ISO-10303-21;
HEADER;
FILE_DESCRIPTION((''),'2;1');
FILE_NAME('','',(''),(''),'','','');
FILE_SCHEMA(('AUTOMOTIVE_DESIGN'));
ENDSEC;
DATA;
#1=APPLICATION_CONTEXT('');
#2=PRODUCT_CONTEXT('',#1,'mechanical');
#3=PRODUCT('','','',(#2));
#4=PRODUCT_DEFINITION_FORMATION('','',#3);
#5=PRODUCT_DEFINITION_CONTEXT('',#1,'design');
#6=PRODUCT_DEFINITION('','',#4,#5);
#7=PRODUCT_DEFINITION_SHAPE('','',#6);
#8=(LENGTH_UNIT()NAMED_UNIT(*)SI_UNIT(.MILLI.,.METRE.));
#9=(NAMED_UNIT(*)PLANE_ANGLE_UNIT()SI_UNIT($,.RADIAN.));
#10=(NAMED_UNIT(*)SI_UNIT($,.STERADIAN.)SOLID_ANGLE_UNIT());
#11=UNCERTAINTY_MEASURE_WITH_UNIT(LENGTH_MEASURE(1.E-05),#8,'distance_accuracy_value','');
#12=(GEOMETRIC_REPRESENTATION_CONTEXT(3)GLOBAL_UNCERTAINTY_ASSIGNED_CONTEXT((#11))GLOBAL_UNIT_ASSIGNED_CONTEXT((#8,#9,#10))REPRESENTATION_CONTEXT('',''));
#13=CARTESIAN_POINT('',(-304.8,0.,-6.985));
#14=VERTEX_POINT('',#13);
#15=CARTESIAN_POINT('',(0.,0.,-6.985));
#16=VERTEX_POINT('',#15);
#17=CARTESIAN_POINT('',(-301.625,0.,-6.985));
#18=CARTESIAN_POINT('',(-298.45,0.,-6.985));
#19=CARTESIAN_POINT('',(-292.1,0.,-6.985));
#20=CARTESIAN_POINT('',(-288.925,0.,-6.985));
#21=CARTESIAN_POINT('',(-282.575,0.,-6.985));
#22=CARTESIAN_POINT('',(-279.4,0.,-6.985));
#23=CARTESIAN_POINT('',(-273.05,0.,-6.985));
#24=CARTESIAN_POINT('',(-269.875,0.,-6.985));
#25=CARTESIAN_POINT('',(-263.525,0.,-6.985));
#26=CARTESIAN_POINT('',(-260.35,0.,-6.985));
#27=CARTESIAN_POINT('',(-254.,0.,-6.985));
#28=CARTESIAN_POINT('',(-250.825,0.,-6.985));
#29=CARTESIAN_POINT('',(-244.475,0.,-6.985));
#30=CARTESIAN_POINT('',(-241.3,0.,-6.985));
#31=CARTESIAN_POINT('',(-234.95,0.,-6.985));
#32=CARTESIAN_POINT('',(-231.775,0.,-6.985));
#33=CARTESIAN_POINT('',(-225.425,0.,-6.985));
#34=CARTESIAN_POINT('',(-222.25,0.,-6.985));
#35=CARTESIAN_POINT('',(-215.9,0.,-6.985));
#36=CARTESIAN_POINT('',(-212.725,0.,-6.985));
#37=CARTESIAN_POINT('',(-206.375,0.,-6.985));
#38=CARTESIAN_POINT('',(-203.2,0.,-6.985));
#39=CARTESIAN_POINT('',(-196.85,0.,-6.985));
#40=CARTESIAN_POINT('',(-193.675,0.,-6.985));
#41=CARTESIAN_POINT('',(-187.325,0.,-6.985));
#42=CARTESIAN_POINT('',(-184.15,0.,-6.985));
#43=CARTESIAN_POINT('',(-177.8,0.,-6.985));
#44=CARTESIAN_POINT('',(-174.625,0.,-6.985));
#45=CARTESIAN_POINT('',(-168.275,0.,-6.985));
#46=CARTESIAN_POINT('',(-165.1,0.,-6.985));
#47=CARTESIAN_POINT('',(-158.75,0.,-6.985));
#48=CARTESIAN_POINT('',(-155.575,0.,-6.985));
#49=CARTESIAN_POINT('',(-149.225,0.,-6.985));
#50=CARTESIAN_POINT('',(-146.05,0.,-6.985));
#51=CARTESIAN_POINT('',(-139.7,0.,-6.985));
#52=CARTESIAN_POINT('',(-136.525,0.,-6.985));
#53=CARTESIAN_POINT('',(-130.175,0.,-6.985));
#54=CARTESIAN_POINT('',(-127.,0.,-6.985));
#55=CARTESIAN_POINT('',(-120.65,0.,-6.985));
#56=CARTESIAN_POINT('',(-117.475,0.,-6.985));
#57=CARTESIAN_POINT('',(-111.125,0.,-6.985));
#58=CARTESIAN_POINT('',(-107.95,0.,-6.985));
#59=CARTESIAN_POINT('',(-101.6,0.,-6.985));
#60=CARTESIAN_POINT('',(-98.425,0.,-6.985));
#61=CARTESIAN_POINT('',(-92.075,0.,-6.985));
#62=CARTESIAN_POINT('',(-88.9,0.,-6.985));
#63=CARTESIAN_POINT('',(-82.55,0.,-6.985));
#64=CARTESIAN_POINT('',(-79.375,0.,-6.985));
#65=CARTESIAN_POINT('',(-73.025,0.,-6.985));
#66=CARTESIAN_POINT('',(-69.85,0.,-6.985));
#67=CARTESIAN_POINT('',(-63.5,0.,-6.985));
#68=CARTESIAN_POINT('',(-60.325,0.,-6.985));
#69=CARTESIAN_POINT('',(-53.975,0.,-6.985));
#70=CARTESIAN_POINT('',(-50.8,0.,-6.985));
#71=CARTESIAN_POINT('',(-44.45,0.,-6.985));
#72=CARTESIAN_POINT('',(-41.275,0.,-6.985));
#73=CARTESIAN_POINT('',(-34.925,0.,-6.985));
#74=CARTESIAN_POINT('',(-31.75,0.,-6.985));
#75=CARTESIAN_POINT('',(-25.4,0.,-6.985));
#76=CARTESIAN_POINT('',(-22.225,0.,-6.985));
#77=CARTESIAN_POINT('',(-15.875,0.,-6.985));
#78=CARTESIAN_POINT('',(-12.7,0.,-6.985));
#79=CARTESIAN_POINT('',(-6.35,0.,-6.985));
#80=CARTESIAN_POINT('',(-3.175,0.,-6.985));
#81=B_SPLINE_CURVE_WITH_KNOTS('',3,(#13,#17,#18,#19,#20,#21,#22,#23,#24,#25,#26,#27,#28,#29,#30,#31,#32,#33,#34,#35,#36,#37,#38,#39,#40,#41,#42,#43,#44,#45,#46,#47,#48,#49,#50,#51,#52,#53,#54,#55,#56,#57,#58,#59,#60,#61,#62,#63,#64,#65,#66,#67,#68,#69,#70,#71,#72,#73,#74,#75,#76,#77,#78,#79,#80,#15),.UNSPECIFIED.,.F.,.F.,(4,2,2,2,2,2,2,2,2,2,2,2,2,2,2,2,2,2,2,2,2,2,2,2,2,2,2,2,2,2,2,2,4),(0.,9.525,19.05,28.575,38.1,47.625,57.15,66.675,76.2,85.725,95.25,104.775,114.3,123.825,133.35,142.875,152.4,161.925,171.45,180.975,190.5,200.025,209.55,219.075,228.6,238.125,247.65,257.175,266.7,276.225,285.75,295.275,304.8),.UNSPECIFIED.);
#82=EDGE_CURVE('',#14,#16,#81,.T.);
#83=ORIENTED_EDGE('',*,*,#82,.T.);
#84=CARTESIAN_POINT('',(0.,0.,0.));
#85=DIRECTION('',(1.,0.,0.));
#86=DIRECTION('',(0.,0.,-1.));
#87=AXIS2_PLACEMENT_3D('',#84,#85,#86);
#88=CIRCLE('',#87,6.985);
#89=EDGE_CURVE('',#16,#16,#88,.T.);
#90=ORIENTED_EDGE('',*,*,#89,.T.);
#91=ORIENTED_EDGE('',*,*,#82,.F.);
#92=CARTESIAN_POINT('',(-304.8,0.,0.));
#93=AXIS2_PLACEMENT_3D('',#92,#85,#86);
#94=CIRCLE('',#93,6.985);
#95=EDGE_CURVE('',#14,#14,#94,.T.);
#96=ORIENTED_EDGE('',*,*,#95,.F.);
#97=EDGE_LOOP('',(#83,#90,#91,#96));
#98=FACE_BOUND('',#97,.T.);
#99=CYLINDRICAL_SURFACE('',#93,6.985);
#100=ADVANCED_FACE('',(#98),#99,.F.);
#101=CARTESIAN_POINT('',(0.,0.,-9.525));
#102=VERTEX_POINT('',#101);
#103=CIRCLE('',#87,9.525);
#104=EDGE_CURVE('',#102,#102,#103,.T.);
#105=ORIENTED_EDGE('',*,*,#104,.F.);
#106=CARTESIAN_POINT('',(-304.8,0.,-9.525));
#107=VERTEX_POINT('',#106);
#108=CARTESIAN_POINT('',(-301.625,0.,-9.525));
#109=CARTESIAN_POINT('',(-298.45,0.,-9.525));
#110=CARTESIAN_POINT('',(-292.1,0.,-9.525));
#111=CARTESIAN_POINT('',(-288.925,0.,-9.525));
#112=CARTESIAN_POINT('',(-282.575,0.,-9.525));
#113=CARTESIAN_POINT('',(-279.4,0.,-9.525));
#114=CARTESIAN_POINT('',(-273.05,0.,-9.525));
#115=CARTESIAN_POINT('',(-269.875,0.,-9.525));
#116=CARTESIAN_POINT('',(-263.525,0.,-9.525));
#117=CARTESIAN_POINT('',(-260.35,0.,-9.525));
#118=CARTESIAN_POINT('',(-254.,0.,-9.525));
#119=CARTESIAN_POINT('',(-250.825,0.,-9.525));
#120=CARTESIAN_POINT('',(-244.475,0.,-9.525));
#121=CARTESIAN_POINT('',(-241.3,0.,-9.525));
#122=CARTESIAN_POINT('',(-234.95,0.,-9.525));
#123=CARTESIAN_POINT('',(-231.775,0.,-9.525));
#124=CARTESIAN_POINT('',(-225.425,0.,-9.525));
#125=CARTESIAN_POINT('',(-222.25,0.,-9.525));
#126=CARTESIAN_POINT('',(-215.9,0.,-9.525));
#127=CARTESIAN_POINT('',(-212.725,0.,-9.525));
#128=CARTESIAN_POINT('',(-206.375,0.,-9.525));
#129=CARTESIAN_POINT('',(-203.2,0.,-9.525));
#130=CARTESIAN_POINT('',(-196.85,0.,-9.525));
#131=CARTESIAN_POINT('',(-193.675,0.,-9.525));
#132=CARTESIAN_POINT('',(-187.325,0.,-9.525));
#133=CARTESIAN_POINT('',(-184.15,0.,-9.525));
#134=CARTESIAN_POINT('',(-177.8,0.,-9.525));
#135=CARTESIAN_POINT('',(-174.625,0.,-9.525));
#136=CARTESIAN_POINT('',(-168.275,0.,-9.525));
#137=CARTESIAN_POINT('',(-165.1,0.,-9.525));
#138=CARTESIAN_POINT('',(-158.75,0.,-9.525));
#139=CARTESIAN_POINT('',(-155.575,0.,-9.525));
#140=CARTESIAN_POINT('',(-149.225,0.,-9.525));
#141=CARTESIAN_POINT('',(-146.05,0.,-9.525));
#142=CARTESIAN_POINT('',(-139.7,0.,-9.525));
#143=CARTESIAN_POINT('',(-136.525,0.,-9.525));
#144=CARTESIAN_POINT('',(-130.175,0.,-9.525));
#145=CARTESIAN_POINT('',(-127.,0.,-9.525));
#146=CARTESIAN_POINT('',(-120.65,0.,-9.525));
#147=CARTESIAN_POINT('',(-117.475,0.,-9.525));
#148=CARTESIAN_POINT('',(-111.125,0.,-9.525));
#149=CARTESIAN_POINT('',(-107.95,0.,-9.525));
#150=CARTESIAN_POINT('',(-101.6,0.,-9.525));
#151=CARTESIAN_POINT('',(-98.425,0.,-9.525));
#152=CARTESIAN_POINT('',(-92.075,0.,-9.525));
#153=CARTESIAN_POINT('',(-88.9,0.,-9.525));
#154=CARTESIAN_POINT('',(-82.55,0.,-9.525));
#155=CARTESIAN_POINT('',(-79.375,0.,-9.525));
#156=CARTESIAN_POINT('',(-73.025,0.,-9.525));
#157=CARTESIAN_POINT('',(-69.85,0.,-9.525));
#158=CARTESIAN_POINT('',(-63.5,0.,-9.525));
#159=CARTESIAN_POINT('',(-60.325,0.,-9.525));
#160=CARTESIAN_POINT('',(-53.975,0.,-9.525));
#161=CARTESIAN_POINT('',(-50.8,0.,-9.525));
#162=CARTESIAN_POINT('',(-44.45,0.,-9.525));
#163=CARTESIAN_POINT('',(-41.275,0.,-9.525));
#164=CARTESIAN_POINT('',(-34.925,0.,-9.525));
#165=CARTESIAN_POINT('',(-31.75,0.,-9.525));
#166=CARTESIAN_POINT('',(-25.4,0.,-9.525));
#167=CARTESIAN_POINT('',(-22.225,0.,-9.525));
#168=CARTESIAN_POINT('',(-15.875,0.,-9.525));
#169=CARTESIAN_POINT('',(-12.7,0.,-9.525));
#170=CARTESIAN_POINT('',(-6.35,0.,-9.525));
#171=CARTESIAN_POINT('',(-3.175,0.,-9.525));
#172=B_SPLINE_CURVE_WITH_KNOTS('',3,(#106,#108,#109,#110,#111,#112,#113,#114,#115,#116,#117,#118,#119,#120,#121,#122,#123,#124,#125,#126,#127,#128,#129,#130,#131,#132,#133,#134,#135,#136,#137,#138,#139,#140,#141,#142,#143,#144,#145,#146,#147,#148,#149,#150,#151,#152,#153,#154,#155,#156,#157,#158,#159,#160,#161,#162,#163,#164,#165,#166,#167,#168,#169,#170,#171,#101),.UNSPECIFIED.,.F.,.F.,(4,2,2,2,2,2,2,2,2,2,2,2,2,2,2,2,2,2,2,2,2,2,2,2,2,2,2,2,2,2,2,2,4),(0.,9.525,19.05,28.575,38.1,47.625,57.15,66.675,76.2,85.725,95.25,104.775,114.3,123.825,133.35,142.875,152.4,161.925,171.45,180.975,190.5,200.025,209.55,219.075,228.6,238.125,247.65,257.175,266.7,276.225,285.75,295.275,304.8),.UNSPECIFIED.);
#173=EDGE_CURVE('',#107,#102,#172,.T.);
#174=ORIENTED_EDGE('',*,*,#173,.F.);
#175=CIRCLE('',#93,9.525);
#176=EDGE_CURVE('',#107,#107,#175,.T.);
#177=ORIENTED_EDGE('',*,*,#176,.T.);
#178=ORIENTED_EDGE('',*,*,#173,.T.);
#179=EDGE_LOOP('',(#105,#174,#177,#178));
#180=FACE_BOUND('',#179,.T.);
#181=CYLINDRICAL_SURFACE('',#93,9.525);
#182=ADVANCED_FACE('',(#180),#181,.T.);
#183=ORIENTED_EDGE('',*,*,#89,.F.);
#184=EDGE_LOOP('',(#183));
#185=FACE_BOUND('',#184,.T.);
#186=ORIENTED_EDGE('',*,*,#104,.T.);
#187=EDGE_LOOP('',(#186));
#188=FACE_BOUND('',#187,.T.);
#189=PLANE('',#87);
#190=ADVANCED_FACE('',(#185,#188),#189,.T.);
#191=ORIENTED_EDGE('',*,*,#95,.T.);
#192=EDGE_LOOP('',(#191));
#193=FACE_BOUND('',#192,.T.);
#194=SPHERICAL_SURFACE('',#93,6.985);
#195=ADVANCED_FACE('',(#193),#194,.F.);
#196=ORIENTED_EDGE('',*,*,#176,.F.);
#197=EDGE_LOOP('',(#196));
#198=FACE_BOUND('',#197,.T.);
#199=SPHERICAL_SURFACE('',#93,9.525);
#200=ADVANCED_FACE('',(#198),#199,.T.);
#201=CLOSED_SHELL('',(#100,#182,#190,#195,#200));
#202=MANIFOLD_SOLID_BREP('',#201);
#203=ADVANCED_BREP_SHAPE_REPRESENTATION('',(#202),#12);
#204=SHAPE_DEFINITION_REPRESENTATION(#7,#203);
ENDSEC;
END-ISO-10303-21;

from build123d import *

# Parameters (mm, degrees)
SKETCH1_R           = 9.525
BOSS_EXTRUDE1_DEPTH = 304.8
DOME1_FACE_RADIUS   = 9.525
DOME1_HEIGHT        = 9.525


# Read off the part's stored shape, not the designer's step: Shell1
with BuildPart() as part:
    # Sketch1 → Boss-Extrude1 (new body)
    with BuildSketch(Plane(origin=(0, 0, 0), x_dir=(0, 0, -1), z_dir=(1, 0, 0))):
        Circle(SKETCH1_R)
    extrude(amount=-BOSS_EXTRUDE1_DEPTH)

    # Dome1: a dome of height H over a round flat face of radius A is a cap of a sphere of radius (A * A + H * H) / (2 * H)
    dome1_r = (DOME1_FACE_RADIUS * DOME1_FACE_RADIUS + DOME1_HEIGHT * DOME1_HEIGHT) / (2 * DOME1_HEIGHT)
    dome1_base = Plane((-304.8, 0, 0), z_dir=(-1, 0, 0))
    with Locations(dome1_base.offset(DOME1_HEIGHT - dome1_r)):
        dome1_ball = Sphere(dome1_r, mode=Mode.PRIVATE)
    add(split(dome1_ball, bisect_by=dome1_base, keep=Keep.TOP, mode=Mode.PRIVATE))

    # Shell1 outline → Shell1 (revolve, cut)
    with BuildSketch(Plane.YX):
        with BuildLine():
            ThreePointArc((0, -311.785), (4.939140869, -309.739140864), (6.985, -304.799999993))
            Line((6.985, -304.799999993), (6.985, 0))
            Line((6.985, 0), (0, 0))
            Line((0, 0), (0, -311.785))
        make_face()
    revolve(axis=Axis((0, 0, 0), (1, 0, 0)), mode=Mode.SUBTRACT)


solid = part.part
